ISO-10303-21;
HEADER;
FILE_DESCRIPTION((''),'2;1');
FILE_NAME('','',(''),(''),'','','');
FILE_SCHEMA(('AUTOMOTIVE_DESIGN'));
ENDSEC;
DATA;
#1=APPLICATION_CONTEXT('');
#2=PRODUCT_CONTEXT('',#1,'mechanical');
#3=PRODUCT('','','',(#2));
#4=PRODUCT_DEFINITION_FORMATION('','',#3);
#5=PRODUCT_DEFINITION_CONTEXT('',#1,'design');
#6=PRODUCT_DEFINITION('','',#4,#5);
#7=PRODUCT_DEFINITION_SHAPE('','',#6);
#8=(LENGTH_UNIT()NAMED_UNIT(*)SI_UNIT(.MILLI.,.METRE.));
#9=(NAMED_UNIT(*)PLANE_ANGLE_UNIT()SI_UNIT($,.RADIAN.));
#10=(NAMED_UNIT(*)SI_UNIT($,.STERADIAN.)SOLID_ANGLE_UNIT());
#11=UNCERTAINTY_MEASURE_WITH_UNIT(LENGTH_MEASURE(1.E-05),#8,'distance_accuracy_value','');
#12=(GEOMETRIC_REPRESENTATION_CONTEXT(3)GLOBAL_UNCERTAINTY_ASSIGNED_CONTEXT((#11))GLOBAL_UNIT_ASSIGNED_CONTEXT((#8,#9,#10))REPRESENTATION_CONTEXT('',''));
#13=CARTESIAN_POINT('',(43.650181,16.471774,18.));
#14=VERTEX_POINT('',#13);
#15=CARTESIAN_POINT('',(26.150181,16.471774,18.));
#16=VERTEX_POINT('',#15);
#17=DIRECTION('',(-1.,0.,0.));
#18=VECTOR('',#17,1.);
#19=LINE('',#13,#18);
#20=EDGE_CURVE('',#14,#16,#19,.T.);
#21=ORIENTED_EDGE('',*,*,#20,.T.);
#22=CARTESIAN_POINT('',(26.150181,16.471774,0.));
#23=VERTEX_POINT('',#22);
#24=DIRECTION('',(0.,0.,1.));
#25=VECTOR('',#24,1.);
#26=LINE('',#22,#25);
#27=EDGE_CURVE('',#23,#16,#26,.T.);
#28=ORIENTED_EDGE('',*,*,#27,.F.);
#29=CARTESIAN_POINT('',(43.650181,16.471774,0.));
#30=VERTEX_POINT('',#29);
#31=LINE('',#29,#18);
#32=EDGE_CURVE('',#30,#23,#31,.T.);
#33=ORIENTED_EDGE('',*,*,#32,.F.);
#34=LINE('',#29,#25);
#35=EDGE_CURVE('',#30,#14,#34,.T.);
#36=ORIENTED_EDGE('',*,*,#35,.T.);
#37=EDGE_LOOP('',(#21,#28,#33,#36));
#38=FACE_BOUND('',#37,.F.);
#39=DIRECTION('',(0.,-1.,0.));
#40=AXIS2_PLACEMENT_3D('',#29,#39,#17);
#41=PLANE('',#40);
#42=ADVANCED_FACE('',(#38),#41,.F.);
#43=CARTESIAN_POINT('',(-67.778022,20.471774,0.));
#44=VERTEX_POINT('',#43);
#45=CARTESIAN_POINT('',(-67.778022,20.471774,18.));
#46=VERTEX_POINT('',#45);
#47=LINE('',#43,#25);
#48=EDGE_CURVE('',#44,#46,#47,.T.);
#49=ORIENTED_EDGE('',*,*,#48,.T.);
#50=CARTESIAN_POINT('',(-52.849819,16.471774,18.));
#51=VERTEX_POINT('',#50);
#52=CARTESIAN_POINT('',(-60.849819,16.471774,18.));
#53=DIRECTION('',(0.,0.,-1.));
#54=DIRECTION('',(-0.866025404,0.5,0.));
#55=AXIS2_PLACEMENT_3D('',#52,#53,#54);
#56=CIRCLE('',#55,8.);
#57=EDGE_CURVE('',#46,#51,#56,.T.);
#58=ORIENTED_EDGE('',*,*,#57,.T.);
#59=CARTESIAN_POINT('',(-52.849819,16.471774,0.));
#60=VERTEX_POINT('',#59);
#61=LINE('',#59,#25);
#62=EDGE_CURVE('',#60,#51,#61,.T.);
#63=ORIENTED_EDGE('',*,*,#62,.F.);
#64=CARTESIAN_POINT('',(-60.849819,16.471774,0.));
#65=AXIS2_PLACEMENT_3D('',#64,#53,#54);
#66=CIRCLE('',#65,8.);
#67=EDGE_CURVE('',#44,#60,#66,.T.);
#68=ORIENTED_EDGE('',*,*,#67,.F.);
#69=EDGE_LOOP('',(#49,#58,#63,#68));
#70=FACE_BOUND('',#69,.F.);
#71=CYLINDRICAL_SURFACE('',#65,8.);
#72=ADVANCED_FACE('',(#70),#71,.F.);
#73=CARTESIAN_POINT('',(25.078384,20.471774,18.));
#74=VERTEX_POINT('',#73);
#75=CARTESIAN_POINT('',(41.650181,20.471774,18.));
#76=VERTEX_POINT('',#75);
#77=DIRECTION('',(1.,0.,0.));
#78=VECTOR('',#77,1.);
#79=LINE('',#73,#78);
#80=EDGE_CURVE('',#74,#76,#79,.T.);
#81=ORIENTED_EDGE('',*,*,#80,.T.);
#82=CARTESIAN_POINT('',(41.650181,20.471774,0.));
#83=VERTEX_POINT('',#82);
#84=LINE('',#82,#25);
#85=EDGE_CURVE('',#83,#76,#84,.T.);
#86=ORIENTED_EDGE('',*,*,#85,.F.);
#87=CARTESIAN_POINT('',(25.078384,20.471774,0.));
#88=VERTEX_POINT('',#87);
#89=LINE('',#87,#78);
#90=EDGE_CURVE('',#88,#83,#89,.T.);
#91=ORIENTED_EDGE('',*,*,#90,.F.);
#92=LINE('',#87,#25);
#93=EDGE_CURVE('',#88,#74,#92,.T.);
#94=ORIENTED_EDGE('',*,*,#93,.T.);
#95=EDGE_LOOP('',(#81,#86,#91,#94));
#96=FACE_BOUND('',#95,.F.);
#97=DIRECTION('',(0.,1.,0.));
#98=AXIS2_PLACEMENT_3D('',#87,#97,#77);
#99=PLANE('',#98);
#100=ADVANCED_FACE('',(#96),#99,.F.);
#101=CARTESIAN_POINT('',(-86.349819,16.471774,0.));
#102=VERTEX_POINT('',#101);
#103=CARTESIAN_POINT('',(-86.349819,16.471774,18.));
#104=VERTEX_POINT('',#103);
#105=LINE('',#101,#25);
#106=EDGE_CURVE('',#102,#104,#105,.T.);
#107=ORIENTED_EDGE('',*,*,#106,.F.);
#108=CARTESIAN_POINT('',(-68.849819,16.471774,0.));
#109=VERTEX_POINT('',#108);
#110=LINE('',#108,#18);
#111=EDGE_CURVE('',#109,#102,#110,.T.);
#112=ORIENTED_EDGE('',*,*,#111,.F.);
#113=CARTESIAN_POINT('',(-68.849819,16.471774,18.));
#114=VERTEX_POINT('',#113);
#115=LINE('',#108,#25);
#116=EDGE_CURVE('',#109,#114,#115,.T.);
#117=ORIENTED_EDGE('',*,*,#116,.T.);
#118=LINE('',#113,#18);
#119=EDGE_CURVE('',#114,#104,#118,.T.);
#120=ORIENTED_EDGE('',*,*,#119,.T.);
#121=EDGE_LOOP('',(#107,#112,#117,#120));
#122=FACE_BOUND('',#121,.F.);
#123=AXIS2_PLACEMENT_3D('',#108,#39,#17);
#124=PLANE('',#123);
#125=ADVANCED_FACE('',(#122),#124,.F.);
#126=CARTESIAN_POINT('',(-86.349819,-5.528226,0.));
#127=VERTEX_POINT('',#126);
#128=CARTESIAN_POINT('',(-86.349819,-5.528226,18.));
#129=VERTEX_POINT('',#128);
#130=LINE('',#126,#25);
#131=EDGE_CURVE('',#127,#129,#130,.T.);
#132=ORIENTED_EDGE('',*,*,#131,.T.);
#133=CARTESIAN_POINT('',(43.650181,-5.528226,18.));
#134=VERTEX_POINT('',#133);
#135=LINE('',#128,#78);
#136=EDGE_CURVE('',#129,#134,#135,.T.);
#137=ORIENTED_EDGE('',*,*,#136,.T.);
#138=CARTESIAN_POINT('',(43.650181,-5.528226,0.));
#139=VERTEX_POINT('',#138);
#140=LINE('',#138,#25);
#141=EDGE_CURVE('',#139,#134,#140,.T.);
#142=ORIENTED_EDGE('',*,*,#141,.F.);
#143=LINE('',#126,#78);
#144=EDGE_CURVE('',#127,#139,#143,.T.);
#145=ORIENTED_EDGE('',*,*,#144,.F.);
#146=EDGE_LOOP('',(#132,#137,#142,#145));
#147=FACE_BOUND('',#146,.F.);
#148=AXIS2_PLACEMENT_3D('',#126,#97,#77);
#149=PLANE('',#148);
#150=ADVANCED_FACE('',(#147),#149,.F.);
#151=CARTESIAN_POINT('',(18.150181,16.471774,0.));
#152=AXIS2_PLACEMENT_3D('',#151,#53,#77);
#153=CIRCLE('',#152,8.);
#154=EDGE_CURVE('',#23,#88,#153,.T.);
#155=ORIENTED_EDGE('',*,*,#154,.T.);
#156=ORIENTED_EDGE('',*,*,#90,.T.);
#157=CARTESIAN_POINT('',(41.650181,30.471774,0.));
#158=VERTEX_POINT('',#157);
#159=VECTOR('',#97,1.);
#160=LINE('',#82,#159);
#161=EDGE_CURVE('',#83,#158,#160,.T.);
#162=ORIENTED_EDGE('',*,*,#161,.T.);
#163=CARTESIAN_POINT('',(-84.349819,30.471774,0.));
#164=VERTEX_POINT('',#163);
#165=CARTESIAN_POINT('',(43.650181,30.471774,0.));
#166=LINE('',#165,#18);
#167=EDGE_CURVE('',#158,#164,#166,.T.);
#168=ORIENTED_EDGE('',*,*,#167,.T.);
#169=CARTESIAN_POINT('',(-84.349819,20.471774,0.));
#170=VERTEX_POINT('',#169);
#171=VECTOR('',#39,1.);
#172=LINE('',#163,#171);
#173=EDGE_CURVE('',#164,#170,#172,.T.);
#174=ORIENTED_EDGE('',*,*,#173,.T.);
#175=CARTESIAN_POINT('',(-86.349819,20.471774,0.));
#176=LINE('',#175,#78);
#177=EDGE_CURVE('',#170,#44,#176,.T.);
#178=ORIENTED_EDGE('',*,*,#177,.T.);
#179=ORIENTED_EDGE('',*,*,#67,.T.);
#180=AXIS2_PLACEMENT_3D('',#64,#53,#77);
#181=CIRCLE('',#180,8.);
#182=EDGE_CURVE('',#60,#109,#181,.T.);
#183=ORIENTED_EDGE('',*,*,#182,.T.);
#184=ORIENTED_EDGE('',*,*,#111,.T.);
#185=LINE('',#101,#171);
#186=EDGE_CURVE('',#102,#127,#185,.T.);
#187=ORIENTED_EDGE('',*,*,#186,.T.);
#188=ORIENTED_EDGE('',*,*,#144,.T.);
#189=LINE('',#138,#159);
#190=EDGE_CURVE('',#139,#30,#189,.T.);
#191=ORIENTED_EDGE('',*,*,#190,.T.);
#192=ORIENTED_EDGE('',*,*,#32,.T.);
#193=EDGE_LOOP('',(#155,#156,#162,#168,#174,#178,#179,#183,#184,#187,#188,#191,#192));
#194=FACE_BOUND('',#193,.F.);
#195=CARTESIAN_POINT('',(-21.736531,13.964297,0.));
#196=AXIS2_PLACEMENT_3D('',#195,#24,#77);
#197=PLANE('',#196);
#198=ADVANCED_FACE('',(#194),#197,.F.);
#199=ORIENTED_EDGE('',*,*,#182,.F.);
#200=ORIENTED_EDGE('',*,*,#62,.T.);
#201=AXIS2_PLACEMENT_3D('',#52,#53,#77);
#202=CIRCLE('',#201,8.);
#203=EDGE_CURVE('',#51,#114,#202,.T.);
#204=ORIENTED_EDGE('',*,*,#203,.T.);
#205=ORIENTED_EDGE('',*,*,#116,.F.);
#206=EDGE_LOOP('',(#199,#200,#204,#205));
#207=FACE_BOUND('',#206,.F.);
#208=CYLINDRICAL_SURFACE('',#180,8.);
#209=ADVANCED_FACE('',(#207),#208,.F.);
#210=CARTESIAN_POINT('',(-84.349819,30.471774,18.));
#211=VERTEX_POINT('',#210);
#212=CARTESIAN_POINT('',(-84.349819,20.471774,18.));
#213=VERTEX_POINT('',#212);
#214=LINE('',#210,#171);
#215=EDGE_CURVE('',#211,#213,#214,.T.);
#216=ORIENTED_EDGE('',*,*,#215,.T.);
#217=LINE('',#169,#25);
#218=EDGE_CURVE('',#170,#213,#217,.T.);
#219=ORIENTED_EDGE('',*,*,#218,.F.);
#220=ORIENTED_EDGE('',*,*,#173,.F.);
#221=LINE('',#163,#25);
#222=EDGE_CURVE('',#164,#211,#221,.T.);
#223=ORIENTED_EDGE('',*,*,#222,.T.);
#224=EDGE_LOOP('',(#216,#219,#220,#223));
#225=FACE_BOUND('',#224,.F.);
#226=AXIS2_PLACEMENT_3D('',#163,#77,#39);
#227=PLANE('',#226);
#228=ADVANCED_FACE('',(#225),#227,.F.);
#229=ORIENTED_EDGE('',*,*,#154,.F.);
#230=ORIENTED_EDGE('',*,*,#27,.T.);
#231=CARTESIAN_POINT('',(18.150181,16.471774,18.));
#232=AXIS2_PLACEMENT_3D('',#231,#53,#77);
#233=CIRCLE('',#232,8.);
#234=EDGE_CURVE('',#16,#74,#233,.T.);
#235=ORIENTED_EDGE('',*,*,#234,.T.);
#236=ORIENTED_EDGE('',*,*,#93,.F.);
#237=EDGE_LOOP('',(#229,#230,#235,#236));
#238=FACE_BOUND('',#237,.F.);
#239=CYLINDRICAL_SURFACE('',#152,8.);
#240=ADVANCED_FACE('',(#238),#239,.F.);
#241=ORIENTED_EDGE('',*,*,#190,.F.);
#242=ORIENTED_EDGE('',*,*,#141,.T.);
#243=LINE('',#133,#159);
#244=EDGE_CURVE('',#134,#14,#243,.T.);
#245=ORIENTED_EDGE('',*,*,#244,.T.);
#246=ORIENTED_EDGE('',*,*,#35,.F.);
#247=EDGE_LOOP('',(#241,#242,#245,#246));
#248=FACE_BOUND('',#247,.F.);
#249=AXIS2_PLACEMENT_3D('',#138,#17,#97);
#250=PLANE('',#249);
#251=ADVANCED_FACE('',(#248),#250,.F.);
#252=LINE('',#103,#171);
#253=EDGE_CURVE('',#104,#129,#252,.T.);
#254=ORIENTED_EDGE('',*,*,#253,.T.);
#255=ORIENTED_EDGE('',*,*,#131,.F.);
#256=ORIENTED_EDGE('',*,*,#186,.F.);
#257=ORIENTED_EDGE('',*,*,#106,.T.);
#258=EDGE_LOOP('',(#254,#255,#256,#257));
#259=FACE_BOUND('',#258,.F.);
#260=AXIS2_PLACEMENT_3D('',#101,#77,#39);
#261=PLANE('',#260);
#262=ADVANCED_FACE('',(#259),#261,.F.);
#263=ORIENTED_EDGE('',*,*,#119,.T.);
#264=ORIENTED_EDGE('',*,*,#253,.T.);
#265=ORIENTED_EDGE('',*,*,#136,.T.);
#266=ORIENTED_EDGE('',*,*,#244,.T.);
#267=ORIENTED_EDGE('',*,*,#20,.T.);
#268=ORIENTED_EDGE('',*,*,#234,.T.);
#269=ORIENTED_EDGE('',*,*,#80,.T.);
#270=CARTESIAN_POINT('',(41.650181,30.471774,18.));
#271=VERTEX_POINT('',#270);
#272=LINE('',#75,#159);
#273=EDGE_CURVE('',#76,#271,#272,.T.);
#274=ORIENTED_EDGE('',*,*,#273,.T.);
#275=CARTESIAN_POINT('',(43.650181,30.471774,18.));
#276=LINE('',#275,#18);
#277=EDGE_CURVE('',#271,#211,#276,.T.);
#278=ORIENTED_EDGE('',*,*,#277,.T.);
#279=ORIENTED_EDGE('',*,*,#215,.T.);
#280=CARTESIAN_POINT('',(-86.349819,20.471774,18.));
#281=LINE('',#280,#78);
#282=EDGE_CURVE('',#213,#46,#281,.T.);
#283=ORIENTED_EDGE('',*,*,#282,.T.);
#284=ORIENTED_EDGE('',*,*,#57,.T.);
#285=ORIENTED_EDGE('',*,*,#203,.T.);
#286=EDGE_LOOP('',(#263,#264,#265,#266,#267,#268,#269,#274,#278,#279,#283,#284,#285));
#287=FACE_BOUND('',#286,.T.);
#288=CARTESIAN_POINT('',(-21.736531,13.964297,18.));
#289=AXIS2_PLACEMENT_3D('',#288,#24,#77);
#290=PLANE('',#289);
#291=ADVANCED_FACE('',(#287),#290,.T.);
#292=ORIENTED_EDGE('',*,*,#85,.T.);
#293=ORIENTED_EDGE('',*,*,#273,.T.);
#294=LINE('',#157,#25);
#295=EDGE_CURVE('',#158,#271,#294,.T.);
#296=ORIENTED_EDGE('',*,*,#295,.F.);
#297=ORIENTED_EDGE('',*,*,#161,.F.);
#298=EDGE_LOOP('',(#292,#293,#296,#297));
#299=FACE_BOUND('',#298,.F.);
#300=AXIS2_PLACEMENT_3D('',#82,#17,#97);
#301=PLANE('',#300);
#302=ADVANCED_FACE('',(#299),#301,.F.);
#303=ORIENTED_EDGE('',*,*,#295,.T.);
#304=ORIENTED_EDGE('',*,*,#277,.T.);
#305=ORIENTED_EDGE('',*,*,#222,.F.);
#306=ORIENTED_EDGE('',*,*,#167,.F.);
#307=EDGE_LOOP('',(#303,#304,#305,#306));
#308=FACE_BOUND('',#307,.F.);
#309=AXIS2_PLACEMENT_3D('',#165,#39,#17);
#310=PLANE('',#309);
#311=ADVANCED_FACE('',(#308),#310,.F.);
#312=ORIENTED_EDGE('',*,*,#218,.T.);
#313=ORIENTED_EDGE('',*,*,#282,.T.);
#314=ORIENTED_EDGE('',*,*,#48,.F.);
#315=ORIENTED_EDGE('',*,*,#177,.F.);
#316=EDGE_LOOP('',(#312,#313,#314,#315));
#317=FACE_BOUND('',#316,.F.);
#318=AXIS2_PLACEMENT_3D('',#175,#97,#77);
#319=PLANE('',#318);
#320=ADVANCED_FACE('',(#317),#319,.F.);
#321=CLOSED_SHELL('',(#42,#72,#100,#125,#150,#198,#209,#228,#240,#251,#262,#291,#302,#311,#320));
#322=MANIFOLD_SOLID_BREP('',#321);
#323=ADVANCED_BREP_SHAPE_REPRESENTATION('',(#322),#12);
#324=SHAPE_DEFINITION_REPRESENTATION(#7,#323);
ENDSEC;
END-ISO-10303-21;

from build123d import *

# Parameters (mm, degrees)
F0_R     = 13
F1_DEPTH = 18
F2_DEPTH = 2
F3_DEPTH = 2


with BuildPart() as f1:
    # F0 (on Top) → F1 (new body)
    with BuildSketch(Plane.XY):
        with BuildLine():
            Line((43.6501808017, 30.4717739075), (-86.3498191983, 30.4717739075))
            Line((-86.3498191983, 30.4717739075), (-86.3498191983, 20.4717739075))
            Line((-86.3498191983, 20.4717739075), (-67.7780224285, 20.4717739075))
            ThreePointArc((-67.7780224285, 20.4717739075), (-58.7792668374, 24.1991805179), (-52.8498191983, 16.4717739075))
            ThreePointArc((-52.8498191983, 16.4717739075), (-60.8498191983, 8.4717739075), (-68.8498191983, 16.4717739075))
            Line((-68.8498191983, 16.4717739075), (-86.3498191983, 16.4717739075))
            Line((-86.3498191983, 16.4717739075), (-86.3498191983, -5.5282260925))
            Line((-86.3498191983, -5.5282260925), (43.6501808017, -5.5282260925))
            Line((43.6501808017, -5.5282260925), (43.6501808017, 16.4717739075))
            Line((43.6501808017, 16.4717739075), (26.1501808017, 16.4717739075))
            ThreePointArc((26.1501808017, 16.4717739075), (10.4227741914, 14.4012215467), (25.078384032, 20.4717739075))
            Line((25.078384032, 20.4717739075), (43.6501808017, 20.4717739075))
            Line((43.6501808017, 20.4717739075), (43.6501808017, 30.4717739075))
        make_face()
        with Locations((-21.3498191983, 16.4717739075)):
            Circle(F0_R, mode=Mode.SUBTRACT)
        with Locations((-21.3498191983, 16.4717739075)):
            Circle(F0_R)
    extrude(amount=F1_DEPTH)

    # F2 (cut): a face of the model
    f2_faces = [f1.faces().sort_by_distance(p)[0] for p in [
        (-86.3498191983, 25.4717739075, 9),
    ]]
    extrude(f2_faces, amount=-F2_DEPTH, mode=Mode.SUBTRACT)

    # F3 (cut): a face of the model
    f3_faces = [f1.faces().sort_by_distance(p)[0] for p in [
        (43.6501808017, 25.4717739075, 9),
    ]]
    extrude(f3_faces, amount=-F3_DEPTH, mode=Mode.SUBTRACT)


solid = f1.part
